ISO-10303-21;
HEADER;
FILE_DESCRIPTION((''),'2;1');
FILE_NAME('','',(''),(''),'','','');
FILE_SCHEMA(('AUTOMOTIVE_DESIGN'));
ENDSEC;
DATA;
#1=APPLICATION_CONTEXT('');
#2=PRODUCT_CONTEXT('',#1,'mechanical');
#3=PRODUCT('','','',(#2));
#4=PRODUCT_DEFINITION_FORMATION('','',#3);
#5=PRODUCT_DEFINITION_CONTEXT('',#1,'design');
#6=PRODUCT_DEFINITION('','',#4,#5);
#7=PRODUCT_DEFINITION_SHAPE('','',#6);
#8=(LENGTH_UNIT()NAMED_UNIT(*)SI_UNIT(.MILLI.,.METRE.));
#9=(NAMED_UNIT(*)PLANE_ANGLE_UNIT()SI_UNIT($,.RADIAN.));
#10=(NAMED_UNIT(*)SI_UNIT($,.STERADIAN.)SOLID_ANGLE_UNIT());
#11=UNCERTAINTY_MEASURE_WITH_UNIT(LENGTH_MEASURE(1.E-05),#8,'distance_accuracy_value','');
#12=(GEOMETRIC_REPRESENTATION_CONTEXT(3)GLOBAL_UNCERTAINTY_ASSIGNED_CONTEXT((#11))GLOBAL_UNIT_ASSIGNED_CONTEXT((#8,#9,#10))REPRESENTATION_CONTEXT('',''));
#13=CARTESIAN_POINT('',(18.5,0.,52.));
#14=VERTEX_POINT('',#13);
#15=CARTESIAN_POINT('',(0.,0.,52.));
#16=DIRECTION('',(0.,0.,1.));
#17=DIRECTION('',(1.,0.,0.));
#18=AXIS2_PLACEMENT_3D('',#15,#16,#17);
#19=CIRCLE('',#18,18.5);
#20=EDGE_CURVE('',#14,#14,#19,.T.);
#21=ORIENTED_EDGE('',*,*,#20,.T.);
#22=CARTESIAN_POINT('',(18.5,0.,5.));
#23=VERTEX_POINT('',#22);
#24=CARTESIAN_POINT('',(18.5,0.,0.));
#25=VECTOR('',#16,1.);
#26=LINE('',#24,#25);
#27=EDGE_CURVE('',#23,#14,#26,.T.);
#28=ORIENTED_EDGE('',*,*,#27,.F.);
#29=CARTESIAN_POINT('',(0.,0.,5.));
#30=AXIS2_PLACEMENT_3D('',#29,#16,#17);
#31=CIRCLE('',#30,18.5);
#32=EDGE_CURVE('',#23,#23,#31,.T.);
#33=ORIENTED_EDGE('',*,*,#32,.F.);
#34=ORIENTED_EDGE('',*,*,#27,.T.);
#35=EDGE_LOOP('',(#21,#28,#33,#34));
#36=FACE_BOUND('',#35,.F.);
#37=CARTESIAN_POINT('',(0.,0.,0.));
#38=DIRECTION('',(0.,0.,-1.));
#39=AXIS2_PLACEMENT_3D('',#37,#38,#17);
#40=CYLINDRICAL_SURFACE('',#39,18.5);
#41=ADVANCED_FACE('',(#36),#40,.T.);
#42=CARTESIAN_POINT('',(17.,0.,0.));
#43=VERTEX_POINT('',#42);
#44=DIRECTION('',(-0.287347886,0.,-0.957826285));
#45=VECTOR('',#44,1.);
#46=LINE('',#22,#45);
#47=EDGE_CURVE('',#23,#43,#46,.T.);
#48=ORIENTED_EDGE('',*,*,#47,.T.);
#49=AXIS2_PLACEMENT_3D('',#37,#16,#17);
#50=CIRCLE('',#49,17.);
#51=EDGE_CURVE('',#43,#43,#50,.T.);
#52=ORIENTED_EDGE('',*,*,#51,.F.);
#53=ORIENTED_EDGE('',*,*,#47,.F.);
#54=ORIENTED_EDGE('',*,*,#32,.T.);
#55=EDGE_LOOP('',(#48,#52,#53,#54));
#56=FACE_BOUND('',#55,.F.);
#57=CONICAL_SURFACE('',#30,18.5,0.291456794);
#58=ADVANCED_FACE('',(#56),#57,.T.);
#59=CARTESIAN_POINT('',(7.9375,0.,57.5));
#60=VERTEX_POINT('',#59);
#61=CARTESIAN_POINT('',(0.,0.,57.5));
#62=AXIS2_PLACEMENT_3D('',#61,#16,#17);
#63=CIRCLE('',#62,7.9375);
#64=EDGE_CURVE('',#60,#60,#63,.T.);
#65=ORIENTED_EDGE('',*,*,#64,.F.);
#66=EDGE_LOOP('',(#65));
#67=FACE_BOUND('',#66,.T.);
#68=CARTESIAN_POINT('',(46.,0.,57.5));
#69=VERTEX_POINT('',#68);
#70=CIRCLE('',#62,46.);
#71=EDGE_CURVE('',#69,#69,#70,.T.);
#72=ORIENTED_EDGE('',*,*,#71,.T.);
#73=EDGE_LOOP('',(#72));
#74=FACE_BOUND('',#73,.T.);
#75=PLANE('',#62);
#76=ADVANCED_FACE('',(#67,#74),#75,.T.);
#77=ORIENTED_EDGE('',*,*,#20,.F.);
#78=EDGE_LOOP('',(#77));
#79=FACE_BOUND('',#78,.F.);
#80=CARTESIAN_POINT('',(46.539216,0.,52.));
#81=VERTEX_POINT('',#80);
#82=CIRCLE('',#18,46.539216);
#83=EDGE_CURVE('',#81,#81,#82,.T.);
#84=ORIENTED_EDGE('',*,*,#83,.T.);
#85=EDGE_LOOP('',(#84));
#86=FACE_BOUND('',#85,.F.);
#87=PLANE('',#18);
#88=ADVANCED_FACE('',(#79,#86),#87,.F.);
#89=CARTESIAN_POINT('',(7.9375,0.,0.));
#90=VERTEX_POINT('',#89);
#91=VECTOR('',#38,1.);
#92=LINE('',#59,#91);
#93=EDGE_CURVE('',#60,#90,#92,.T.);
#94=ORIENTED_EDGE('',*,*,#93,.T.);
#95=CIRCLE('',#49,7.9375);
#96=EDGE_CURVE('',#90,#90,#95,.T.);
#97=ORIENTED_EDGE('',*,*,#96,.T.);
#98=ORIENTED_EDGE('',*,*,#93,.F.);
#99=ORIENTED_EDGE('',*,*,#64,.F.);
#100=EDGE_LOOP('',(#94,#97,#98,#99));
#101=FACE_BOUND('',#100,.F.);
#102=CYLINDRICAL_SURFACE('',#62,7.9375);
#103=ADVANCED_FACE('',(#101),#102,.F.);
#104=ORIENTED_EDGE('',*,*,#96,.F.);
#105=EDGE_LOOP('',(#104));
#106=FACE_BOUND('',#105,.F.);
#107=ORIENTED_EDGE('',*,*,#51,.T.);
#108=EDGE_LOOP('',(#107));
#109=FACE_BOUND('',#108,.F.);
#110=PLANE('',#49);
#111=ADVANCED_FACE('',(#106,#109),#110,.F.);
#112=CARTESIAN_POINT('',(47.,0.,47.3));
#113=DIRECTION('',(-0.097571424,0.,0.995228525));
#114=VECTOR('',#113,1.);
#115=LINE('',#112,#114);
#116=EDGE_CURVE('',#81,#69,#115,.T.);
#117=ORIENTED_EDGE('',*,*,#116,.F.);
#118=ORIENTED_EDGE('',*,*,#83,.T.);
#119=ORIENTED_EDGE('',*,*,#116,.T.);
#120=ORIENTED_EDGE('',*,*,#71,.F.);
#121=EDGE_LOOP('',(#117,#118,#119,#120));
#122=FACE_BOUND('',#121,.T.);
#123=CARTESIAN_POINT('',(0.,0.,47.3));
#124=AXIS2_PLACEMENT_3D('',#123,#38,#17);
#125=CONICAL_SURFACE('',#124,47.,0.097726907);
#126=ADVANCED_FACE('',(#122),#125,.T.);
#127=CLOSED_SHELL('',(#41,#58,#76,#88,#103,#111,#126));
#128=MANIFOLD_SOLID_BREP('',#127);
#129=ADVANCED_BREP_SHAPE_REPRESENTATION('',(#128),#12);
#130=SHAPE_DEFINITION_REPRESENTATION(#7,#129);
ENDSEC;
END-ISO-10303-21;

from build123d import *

# Parameters (mm, degrees)
F0_R     = 18.5
F1_DEPTH = 52
F2_SIZE2 = 1.5
F2_SIZE  = 5
F3_R     = 47
F4_DEPTH = 5.5
F6_R     = 7.9375
F7_DEPTH = 57.501


# Not quite as in the source:
# - a fillet or chamfer that OpenCascade refuses, or shapes differently, is made with other operations: its cross-section is extruded or revolved along the edge and cut away or added


with BuildPart() as f1:
    # F0 (on Top) → F1 (new body)
    with BuildSketch(Plane.XY):
        Circle(F0_R)
    extrude(amount=F1_DEPTH)

    # F2
    f2_edges = [f1.edges().sort_by_distance(p)[0] for p in [
        (-18.5, 0, 0),
    ]]
    f2_side = f1.faces().sort_by_distance((-18.5, 0, 26))[0]
    chamfer(f2_edges, length=F2_SIZE, length2=F2_SIZE2, reference=f2_side)

    # F3 (on face) → F4 (join)
    with BuildSketch(Plane.XY.offset(52)):
        Circle(F3_R)
    extrude(amount=F4_DEPTH)

    # F5: chamfer of 1 x 10.2 on 1 edges, made by hand

    # F5_s1 → F5_t2 (revolve, cut)
    with BuildSketch(Plane.XZ):
        Polygon((47, 47.3), (46, 57.5), (47, 57.5), align=None)
    revolve(axis=Axis((0, 0, 57.5), (0, 0, 1)), mode=Mode.SUBTRACT)

    # F6 (on face) → F7 (cut, through all)
    with BuildSketch(Plane.XY.offset(57.5)):
        Circle(F6_R)
    extrude(amount=-F7_DEPTH, mode=Mode.SUBTRACT)


solid = f1.part
